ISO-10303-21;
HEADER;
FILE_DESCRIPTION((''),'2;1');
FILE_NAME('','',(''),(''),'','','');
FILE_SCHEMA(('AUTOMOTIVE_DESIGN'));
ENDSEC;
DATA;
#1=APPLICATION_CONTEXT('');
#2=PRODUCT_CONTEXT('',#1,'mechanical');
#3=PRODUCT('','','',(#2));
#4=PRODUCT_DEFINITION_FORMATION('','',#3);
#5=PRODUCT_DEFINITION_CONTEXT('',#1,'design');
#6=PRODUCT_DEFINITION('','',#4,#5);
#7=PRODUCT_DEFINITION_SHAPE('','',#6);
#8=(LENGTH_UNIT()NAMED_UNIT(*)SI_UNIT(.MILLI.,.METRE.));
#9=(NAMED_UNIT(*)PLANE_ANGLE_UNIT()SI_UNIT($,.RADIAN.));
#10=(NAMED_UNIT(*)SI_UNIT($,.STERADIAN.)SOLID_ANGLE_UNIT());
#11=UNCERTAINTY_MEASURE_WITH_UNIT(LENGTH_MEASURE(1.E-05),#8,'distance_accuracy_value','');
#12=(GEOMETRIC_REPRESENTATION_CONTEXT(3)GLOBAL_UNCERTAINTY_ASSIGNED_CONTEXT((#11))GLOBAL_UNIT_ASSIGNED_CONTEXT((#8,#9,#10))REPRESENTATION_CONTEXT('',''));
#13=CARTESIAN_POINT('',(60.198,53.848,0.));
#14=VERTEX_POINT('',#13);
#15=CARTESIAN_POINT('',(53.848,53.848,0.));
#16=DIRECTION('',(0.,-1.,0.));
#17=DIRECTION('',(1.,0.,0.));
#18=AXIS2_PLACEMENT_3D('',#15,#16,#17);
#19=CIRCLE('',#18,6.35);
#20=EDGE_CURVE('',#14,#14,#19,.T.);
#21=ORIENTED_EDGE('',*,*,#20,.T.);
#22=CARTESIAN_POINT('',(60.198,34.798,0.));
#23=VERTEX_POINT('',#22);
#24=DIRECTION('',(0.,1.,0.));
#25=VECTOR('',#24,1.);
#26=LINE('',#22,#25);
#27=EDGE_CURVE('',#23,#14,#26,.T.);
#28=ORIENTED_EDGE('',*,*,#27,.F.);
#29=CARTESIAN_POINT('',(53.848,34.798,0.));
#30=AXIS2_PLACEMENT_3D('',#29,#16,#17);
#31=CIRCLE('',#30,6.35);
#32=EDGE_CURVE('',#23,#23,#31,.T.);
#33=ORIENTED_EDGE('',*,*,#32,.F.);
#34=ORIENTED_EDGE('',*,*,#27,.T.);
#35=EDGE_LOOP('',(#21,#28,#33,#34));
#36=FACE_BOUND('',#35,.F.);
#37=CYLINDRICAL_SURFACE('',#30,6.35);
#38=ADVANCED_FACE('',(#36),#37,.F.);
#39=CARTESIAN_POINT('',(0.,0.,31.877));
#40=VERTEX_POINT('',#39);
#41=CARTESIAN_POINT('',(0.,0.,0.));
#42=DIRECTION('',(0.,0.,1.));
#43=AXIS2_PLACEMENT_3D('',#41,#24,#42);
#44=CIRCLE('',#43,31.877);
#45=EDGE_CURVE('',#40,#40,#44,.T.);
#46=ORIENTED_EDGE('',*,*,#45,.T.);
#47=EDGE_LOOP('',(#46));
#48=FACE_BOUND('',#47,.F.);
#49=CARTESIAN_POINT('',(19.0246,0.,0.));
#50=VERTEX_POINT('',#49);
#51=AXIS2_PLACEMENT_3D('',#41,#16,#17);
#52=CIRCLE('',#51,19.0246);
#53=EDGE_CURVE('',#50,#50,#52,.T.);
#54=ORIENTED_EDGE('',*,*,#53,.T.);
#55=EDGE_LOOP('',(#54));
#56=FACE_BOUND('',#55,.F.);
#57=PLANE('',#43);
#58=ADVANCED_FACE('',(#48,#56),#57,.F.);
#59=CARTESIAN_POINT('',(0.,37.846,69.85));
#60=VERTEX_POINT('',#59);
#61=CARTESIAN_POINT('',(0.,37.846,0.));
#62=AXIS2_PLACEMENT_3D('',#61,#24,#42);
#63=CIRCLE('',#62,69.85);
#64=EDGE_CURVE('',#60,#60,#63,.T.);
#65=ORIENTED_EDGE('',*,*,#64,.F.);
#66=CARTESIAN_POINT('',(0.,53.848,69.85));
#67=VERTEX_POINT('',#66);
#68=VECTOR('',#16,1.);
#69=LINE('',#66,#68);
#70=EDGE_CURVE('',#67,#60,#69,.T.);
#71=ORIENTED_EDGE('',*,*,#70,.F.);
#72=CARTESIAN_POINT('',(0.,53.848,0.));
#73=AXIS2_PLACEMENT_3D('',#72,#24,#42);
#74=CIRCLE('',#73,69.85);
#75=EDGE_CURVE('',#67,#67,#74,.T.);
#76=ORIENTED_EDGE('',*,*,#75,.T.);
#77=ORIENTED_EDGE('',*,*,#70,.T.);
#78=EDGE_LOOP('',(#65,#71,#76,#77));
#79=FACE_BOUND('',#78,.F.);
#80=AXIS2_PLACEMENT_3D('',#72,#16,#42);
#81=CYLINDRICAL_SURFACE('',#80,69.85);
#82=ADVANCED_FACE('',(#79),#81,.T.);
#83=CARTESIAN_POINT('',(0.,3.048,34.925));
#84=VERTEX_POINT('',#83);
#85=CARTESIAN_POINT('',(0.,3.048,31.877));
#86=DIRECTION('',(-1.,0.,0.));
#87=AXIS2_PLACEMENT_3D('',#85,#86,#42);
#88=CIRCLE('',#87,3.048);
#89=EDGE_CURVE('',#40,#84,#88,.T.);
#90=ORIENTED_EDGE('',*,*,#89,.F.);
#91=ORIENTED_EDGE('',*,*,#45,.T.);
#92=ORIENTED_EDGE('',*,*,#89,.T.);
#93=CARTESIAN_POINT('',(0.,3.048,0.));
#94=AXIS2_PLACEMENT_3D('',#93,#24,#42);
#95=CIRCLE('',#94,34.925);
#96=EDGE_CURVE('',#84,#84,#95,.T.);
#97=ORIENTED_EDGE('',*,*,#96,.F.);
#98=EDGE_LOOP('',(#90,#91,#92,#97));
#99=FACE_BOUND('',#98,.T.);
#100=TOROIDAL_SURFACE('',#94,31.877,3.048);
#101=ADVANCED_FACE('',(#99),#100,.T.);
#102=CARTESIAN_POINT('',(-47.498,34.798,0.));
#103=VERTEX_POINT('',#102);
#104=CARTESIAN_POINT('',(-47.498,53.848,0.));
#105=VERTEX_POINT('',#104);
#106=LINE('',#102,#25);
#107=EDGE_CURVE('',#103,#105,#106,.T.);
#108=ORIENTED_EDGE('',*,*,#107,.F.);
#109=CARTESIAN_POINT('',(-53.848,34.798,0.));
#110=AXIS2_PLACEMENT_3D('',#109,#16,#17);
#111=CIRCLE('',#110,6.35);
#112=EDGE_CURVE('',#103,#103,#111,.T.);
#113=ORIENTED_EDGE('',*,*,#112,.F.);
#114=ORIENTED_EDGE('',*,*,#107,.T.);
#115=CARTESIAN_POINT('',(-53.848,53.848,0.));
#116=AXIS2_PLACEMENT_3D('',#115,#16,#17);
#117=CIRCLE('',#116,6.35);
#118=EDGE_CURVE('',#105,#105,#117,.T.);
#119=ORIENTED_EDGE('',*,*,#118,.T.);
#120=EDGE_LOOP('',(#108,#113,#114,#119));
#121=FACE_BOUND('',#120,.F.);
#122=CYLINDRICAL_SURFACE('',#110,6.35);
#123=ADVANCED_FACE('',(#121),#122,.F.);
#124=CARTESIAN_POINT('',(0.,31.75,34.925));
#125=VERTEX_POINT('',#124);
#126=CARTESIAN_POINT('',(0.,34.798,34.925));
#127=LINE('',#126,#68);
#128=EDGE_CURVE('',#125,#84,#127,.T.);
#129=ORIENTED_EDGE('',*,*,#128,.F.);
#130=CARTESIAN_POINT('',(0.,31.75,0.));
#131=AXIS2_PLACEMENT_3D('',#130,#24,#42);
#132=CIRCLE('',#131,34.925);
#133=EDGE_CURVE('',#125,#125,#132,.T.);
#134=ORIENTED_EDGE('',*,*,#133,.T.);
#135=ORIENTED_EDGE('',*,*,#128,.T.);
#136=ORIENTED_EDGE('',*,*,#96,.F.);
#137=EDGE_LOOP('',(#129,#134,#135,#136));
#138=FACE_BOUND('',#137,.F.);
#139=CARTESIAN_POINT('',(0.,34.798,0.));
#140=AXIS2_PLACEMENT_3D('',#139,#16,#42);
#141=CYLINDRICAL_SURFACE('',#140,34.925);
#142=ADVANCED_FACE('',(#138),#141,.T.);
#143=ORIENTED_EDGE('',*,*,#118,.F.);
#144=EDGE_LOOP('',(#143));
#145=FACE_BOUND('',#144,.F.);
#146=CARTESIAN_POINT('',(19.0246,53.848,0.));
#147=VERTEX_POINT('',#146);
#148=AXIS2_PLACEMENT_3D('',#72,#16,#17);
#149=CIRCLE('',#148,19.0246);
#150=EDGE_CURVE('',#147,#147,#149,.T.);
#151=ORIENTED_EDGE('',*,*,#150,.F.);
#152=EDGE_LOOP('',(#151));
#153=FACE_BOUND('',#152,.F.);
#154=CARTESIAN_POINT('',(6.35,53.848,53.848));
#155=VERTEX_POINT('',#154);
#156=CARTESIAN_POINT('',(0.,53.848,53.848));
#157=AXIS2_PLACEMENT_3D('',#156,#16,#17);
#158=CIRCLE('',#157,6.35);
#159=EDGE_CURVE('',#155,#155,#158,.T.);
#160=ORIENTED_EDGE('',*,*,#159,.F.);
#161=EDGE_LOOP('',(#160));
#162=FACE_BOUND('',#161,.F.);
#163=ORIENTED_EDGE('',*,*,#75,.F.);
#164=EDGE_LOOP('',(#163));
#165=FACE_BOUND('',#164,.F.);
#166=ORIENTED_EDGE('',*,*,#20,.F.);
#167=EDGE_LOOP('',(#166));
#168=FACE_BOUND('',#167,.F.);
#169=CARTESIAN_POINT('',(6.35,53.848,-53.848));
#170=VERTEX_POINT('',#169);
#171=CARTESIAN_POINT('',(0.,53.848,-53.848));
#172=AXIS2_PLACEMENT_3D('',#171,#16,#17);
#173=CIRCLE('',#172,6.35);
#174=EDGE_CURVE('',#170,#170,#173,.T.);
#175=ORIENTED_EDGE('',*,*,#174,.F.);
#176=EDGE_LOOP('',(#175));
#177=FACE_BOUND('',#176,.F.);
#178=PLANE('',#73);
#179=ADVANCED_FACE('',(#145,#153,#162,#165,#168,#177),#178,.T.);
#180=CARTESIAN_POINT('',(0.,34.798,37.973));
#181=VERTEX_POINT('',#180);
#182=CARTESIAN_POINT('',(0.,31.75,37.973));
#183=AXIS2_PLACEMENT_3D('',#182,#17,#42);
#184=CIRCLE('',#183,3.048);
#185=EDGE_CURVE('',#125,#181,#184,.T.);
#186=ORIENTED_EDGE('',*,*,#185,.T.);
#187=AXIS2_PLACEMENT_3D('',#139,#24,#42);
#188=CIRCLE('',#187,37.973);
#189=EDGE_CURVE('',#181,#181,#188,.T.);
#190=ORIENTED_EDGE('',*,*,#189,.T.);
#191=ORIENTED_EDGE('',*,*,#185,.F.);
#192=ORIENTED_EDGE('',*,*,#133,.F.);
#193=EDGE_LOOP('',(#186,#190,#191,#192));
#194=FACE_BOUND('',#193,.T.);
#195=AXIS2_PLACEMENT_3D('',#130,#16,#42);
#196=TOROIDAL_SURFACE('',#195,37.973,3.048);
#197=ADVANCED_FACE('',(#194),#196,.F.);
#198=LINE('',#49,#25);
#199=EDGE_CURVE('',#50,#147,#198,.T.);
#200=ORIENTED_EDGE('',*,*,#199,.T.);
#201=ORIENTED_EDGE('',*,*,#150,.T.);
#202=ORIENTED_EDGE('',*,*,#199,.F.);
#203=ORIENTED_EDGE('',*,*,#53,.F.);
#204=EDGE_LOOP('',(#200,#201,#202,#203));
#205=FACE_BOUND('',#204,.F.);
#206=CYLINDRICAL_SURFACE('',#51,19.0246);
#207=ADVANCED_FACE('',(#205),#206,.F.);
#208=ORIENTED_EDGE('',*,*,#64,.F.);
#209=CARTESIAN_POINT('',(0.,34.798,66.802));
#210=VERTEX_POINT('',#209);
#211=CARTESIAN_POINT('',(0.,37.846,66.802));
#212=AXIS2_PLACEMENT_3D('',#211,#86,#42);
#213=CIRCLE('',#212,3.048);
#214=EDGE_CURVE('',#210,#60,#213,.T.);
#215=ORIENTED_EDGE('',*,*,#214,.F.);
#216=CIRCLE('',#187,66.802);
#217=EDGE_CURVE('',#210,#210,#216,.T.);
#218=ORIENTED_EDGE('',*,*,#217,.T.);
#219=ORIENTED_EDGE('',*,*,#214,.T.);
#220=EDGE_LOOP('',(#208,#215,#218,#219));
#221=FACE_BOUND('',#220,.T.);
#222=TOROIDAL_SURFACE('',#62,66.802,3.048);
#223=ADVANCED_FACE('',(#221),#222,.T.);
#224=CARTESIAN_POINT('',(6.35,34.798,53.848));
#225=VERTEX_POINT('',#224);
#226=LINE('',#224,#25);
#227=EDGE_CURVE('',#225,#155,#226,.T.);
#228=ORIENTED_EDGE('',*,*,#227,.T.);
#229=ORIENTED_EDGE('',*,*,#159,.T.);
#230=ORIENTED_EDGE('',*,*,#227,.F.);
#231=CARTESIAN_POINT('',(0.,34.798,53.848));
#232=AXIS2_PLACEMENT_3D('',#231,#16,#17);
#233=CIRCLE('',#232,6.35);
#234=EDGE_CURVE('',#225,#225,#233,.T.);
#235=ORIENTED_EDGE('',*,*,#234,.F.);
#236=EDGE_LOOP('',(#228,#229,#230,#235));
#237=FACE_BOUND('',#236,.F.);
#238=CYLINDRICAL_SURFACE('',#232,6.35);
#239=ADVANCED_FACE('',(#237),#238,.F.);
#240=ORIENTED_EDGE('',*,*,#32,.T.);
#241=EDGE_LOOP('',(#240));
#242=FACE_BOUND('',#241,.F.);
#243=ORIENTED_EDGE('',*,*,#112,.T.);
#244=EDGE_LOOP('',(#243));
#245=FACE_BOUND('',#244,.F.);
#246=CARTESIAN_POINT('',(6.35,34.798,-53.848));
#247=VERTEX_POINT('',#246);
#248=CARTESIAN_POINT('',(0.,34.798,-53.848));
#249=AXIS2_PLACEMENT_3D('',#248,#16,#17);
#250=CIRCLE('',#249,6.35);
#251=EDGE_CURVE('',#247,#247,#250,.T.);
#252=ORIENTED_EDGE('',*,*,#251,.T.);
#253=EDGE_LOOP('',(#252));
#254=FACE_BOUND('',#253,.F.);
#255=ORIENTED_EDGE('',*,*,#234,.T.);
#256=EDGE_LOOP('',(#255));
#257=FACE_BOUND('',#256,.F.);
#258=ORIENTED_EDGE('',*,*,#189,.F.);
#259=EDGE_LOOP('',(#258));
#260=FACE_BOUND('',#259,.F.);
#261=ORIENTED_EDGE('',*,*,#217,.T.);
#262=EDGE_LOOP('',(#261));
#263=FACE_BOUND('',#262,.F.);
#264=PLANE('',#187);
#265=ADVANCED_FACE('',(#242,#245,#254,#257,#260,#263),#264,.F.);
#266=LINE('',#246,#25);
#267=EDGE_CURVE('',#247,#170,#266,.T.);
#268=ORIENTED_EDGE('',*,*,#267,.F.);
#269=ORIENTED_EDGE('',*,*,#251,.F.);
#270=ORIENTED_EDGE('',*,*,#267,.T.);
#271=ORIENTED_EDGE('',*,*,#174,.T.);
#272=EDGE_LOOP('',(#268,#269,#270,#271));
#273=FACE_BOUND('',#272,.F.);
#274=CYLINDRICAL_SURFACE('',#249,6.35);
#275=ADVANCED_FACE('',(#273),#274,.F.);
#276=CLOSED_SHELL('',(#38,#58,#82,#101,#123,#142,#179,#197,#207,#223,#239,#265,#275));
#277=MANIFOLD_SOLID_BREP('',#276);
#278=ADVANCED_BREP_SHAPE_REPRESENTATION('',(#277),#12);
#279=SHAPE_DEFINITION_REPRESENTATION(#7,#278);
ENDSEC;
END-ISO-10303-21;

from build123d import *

# Parameters (mm, degrees)
F2_R     = 19.0246
F3_DEPTH = 53.849
F4_R     = 6.35
F5_DEPTH = 19.051
F6_R     = 3.048


# Not quite as in the source:
# - a feature names something its author has since deleted; it is built from what else it names


with BuildPart() as f1:
    # F0 (on Right) → F1 (revolve)
    with BuildSketch(Plane.YZ):
        Polygon((0, 34.925), (0, 0), (53.848, 0), (53.848, 69.85), (34.798, 69.85), (34.798, 34.925), align=None)
    revolve(axis=Axis((0, 26.924, 0), (0, 1, 0)))

    # F2 (on face) → F3 (cut, through all)
    with BuildSketch(Plane.XZ):
        Circle(F2_R)
    extrude(amount=-F3_DEPTH, mode=Mode.SUBTRACT)

    # F4 (on face) → F5 (cut, through all)
    with BuildSketch(Plane.XZ.offset(-34.798)):
        with Locations((0, 53.848)):
            Circle(F4_R)
        with Locations((-53.848, 0)):
            Circle(F4_R)
        with Locations((53.848, 0)):
            Circle(F4_R)
        with Locations((0, -53.848)):
            Circle(F4_R)
    extrude(amount=-F5_DEPTH, mode=Mode.SUBTRACT)

    # F6
    f6_edges = [f1.edges().sort_by_distance(p)[0] for p in [
        (0, 34.798, -34.925),
        (0, 0, -34.925),
        (0, 34.798, -69.85),
    ]]
    fillet(f6_edges, radius=F6_R)


solid = f1.part
